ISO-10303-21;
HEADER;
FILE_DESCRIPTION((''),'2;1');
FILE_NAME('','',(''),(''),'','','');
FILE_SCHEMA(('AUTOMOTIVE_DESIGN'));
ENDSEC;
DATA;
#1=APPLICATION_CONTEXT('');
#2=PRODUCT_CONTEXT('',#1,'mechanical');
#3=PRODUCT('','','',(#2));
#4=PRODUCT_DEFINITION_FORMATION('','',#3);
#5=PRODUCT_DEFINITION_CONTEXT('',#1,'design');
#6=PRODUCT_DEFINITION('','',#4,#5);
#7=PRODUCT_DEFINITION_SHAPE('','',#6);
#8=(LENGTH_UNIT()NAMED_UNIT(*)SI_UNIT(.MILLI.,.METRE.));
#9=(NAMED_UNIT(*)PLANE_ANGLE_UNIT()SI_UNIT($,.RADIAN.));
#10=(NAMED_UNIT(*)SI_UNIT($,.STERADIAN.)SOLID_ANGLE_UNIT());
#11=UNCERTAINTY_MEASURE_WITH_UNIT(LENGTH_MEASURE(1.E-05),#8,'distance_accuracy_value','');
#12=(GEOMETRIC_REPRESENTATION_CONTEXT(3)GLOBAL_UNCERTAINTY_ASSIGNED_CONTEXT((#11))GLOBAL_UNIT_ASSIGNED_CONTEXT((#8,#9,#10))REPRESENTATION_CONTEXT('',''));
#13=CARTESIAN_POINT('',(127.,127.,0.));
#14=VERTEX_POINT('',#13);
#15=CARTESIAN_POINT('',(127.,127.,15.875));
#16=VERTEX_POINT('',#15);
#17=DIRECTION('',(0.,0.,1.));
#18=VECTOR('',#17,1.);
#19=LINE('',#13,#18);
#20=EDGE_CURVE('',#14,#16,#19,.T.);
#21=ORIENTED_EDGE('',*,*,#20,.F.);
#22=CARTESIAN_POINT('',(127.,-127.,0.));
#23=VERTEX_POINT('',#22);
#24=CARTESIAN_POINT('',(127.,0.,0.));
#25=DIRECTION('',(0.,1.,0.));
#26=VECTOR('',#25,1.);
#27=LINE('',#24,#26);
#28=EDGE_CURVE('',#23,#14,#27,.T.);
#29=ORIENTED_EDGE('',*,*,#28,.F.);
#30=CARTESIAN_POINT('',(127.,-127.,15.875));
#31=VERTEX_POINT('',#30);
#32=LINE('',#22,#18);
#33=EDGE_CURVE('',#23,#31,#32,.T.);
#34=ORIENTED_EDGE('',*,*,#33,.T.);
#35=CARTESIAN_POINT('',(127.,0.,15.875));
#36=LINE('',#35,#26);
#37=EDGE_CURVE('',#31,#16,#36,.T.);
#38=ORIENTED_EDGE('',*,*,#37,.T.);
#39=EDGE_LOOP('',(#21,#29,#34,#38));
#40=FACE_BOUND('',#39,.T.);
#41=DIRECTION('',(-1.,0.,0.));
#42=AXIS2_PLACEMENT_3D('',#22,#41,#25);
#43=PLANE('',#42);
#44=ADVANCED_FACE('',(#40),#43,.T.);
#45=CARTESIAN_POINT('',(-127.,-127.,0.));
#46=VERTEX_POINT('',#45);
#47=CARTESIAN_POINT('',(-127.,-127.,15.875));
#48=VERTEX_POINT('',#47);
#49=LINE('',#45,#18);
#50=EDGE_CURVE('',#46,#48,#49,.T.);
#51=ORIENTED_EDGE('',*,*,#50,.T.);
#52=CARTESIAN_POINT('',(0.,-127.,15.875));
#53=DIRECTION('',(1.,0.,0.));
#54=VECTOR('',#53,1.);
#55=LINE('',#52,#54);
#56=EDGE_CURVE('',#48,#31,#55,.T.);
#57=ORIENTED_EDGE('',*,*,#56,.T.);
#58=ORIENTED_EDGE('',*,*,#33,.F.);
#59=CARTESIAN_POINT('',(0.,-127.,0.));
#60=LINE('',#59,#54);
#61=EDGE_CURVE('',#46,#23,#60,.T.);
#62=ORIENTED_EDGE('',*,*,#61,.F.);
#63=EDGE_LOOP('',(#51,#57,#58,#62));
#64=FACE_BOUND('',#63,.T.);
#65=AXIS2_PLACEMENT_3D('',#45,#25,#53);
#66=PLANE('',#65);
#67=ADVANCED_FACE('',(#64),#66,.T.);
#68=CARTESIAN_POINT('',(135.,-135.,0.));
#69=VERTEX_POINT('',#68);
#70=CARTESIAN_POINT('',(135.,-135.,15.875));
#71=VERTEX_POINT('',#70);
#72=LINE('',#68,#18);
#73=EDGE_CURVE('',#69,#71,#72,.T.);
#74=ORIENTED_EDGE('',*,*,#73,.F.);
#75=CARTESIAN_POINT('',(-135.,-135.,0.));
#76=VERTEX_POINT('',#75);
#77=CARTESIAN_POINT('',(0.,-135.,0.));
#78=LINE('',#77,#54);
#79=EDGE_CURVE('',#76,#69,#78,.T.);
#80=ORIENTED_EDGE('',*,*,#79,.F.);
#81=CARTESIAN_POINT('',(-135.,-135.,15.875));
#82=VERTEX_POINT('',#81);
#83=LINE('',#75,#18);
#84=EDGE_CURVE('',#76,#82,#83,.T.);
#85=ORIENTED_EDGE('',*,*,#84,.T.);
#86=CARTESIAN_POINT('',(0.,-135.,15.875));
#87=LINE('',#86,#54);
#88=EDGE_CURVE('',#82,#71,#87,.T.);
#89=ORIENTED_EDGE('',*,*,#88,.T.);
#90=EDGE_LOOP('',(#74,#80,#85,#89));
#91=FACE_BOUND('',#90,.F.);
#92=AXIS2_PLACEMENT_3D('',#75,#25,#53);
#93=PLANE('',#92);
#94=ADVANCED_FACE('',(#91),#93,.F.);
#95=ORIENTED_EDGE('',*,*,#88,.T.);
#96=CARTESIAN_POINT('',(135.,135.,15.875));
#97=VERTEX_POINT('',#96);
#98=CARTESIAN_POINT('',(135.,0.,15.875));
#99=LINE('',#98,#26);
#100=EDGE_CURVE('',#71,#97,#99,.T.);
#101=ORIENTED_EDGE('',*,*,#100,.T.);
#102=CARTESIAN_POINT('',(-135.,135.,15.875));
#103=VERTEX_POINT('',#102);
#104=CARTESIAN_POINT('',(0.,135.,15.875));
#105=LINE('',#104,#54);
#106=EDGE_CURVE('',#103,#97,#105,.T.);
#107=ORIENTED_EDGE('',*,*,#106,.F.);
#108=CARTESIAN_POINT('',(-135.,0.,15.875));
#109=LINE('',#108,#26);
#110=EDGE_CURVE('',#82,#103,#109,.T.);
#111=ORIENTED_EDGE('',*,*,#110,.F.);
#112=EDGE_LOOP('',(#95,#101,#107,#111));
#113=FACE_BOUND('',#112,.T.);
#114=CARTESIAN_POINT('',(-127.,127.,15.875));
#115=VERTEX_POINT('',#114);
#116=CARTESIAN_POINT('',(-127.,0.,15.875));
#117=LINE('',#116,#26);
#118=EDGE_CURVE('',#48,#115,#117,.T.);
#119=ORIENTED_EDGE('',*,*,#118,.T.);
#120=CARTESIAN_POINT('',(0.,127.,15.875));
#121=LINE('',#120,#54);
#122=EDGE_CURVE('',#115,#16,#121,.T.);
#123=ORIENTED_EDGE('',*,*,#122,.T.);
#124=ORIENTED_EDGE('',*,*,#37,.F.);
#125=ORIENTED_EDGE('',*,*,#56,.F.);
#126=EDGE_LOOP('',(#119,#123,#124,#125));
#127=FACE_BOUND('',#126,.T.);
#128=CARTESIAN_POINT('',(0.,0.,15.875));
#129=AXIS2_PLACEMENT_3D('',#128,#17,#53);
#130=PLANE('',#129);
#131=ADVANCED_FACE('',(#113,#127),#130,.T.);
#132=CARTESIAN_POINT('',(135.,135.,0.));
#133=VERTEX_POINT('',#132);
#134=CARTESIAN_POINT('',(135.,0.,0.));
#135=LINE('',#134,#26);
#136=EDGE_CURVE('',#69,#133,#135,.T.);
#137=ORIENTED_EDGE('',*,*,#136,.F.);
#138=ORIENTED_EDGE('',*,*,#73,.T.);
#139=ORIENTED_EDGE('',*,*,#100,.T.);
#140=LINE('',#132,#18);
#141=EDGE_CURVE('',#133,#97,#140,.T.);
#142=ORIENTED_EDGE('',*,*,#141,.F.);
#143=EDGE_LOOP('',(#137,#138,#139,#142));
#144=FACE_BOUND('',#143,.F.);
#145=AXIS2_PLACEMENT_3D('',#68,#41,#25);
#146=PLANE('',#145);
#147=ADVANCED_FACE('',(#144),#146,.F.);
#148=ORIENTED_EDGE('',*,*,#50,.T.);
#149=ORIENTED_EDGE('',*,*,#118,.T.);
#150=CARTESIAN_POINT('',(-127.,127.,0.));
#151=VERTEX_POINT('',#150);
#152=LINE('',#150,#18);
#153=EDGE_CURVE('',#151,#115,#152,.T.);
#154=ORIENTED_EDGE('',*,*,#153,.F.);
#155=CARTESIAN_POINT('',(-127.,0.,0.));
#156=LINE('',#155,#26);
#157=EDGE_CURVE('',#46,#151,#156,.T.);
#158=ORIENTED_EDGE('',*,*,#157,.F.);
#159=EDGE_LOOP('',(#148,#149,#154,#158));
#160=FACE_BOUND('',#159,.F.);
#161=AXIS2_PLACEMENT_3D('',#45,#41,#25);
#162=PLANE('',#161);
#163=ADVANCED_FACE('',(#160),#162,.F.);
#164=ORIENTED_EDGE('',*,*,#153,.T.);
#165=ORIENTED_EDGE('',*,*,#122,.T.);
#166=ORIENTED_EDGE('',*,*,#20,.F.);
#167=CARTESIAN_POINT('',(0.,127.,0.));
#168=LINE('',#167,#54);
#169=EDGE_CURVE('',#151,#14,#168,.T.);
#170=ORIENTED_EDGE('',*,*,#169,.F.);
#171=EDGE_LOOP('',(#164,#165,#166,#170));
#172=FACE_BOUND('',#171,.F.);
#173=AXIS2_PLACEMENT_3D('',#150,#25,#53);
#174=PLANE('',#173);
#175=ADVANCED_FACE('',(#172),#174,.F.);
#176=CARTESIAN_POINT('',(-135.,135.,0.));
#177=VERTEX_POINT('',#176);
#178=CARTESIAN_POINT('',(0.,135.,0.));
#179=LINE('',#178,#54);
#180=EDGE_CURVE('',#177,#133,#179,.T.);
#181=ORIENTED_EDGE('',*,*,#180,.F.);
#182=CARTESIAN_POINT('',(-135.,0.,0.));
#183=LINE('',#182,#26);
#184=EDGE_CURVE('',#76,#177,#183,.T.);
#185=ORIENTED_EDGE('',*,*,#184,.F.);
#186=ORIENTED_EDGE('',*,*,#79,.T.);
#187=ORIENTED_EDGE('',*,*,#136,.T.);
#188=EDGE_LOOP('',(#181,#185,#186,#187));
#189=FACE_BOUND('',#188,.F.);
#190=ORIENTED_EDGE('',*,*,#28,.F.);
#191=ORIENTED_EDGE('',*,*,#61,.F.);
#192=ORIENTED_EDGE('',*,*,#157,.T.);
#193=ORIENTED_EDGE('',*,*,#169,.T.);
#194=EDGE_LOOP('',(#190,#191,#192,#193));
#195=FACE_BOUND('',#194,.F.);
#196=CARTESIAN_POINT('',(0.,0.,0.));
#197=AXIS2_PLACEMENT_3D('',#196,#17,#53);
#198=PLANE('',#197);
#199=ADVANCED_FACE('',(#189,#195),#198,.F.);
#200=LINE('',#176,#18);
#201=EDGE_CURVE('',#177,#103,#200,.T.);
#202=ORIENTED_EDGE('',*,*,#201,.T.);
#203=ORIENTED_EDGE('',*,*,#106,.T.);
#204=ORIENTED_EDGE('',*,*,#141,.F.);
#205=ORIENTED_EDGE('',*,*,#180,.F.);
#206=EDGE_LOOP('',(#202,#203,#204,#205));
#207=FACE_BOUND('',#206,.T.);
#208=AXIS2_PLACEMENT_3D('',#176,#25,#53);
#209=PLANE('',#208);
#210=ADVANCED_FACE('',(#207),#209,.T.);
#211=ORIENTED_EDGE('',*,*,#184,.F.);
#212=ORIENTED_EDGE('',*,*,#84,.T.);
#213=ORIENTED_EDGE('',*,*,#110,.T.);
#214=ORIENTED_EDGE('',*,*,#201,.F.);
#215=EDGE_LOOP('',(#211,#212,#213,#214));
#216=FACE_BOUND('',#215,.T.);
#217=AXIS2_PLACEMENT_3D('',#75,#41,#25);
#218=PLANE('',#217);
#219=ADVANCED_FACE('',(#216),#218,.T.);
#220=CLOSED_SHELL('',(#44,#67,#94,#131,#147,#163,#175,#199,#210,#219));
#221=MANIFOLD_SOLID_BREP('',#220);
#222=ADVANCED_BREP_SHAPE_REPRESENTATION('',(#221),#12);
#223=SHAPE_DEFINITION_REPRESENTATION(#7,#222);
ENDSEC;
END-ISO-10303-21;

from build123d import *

# Parameters (mm, degrees)
F0_W     = 270
F0_H     = 270
F0_W_2   = 254
F0_H_2   = 254
F1_DEPTH = 15.875


# Not quite as in the source:
# - a length typed as a fraction of an inch, garbled in the dataset ("3 / 203.2 mm" for 3/8 in), is restored


with BuildPart() as f1:
    # F0 (on Top) → F1 (new body)
    with BuildSketch(Plane.XY):
        Rectangle(F0_W, F0_H)
        Rectangle(F0_W_2, F0_H_2, mode=Mode.SUBTRACT)
    extrude(amount=F1_DEPTH)


solid = f1.part
